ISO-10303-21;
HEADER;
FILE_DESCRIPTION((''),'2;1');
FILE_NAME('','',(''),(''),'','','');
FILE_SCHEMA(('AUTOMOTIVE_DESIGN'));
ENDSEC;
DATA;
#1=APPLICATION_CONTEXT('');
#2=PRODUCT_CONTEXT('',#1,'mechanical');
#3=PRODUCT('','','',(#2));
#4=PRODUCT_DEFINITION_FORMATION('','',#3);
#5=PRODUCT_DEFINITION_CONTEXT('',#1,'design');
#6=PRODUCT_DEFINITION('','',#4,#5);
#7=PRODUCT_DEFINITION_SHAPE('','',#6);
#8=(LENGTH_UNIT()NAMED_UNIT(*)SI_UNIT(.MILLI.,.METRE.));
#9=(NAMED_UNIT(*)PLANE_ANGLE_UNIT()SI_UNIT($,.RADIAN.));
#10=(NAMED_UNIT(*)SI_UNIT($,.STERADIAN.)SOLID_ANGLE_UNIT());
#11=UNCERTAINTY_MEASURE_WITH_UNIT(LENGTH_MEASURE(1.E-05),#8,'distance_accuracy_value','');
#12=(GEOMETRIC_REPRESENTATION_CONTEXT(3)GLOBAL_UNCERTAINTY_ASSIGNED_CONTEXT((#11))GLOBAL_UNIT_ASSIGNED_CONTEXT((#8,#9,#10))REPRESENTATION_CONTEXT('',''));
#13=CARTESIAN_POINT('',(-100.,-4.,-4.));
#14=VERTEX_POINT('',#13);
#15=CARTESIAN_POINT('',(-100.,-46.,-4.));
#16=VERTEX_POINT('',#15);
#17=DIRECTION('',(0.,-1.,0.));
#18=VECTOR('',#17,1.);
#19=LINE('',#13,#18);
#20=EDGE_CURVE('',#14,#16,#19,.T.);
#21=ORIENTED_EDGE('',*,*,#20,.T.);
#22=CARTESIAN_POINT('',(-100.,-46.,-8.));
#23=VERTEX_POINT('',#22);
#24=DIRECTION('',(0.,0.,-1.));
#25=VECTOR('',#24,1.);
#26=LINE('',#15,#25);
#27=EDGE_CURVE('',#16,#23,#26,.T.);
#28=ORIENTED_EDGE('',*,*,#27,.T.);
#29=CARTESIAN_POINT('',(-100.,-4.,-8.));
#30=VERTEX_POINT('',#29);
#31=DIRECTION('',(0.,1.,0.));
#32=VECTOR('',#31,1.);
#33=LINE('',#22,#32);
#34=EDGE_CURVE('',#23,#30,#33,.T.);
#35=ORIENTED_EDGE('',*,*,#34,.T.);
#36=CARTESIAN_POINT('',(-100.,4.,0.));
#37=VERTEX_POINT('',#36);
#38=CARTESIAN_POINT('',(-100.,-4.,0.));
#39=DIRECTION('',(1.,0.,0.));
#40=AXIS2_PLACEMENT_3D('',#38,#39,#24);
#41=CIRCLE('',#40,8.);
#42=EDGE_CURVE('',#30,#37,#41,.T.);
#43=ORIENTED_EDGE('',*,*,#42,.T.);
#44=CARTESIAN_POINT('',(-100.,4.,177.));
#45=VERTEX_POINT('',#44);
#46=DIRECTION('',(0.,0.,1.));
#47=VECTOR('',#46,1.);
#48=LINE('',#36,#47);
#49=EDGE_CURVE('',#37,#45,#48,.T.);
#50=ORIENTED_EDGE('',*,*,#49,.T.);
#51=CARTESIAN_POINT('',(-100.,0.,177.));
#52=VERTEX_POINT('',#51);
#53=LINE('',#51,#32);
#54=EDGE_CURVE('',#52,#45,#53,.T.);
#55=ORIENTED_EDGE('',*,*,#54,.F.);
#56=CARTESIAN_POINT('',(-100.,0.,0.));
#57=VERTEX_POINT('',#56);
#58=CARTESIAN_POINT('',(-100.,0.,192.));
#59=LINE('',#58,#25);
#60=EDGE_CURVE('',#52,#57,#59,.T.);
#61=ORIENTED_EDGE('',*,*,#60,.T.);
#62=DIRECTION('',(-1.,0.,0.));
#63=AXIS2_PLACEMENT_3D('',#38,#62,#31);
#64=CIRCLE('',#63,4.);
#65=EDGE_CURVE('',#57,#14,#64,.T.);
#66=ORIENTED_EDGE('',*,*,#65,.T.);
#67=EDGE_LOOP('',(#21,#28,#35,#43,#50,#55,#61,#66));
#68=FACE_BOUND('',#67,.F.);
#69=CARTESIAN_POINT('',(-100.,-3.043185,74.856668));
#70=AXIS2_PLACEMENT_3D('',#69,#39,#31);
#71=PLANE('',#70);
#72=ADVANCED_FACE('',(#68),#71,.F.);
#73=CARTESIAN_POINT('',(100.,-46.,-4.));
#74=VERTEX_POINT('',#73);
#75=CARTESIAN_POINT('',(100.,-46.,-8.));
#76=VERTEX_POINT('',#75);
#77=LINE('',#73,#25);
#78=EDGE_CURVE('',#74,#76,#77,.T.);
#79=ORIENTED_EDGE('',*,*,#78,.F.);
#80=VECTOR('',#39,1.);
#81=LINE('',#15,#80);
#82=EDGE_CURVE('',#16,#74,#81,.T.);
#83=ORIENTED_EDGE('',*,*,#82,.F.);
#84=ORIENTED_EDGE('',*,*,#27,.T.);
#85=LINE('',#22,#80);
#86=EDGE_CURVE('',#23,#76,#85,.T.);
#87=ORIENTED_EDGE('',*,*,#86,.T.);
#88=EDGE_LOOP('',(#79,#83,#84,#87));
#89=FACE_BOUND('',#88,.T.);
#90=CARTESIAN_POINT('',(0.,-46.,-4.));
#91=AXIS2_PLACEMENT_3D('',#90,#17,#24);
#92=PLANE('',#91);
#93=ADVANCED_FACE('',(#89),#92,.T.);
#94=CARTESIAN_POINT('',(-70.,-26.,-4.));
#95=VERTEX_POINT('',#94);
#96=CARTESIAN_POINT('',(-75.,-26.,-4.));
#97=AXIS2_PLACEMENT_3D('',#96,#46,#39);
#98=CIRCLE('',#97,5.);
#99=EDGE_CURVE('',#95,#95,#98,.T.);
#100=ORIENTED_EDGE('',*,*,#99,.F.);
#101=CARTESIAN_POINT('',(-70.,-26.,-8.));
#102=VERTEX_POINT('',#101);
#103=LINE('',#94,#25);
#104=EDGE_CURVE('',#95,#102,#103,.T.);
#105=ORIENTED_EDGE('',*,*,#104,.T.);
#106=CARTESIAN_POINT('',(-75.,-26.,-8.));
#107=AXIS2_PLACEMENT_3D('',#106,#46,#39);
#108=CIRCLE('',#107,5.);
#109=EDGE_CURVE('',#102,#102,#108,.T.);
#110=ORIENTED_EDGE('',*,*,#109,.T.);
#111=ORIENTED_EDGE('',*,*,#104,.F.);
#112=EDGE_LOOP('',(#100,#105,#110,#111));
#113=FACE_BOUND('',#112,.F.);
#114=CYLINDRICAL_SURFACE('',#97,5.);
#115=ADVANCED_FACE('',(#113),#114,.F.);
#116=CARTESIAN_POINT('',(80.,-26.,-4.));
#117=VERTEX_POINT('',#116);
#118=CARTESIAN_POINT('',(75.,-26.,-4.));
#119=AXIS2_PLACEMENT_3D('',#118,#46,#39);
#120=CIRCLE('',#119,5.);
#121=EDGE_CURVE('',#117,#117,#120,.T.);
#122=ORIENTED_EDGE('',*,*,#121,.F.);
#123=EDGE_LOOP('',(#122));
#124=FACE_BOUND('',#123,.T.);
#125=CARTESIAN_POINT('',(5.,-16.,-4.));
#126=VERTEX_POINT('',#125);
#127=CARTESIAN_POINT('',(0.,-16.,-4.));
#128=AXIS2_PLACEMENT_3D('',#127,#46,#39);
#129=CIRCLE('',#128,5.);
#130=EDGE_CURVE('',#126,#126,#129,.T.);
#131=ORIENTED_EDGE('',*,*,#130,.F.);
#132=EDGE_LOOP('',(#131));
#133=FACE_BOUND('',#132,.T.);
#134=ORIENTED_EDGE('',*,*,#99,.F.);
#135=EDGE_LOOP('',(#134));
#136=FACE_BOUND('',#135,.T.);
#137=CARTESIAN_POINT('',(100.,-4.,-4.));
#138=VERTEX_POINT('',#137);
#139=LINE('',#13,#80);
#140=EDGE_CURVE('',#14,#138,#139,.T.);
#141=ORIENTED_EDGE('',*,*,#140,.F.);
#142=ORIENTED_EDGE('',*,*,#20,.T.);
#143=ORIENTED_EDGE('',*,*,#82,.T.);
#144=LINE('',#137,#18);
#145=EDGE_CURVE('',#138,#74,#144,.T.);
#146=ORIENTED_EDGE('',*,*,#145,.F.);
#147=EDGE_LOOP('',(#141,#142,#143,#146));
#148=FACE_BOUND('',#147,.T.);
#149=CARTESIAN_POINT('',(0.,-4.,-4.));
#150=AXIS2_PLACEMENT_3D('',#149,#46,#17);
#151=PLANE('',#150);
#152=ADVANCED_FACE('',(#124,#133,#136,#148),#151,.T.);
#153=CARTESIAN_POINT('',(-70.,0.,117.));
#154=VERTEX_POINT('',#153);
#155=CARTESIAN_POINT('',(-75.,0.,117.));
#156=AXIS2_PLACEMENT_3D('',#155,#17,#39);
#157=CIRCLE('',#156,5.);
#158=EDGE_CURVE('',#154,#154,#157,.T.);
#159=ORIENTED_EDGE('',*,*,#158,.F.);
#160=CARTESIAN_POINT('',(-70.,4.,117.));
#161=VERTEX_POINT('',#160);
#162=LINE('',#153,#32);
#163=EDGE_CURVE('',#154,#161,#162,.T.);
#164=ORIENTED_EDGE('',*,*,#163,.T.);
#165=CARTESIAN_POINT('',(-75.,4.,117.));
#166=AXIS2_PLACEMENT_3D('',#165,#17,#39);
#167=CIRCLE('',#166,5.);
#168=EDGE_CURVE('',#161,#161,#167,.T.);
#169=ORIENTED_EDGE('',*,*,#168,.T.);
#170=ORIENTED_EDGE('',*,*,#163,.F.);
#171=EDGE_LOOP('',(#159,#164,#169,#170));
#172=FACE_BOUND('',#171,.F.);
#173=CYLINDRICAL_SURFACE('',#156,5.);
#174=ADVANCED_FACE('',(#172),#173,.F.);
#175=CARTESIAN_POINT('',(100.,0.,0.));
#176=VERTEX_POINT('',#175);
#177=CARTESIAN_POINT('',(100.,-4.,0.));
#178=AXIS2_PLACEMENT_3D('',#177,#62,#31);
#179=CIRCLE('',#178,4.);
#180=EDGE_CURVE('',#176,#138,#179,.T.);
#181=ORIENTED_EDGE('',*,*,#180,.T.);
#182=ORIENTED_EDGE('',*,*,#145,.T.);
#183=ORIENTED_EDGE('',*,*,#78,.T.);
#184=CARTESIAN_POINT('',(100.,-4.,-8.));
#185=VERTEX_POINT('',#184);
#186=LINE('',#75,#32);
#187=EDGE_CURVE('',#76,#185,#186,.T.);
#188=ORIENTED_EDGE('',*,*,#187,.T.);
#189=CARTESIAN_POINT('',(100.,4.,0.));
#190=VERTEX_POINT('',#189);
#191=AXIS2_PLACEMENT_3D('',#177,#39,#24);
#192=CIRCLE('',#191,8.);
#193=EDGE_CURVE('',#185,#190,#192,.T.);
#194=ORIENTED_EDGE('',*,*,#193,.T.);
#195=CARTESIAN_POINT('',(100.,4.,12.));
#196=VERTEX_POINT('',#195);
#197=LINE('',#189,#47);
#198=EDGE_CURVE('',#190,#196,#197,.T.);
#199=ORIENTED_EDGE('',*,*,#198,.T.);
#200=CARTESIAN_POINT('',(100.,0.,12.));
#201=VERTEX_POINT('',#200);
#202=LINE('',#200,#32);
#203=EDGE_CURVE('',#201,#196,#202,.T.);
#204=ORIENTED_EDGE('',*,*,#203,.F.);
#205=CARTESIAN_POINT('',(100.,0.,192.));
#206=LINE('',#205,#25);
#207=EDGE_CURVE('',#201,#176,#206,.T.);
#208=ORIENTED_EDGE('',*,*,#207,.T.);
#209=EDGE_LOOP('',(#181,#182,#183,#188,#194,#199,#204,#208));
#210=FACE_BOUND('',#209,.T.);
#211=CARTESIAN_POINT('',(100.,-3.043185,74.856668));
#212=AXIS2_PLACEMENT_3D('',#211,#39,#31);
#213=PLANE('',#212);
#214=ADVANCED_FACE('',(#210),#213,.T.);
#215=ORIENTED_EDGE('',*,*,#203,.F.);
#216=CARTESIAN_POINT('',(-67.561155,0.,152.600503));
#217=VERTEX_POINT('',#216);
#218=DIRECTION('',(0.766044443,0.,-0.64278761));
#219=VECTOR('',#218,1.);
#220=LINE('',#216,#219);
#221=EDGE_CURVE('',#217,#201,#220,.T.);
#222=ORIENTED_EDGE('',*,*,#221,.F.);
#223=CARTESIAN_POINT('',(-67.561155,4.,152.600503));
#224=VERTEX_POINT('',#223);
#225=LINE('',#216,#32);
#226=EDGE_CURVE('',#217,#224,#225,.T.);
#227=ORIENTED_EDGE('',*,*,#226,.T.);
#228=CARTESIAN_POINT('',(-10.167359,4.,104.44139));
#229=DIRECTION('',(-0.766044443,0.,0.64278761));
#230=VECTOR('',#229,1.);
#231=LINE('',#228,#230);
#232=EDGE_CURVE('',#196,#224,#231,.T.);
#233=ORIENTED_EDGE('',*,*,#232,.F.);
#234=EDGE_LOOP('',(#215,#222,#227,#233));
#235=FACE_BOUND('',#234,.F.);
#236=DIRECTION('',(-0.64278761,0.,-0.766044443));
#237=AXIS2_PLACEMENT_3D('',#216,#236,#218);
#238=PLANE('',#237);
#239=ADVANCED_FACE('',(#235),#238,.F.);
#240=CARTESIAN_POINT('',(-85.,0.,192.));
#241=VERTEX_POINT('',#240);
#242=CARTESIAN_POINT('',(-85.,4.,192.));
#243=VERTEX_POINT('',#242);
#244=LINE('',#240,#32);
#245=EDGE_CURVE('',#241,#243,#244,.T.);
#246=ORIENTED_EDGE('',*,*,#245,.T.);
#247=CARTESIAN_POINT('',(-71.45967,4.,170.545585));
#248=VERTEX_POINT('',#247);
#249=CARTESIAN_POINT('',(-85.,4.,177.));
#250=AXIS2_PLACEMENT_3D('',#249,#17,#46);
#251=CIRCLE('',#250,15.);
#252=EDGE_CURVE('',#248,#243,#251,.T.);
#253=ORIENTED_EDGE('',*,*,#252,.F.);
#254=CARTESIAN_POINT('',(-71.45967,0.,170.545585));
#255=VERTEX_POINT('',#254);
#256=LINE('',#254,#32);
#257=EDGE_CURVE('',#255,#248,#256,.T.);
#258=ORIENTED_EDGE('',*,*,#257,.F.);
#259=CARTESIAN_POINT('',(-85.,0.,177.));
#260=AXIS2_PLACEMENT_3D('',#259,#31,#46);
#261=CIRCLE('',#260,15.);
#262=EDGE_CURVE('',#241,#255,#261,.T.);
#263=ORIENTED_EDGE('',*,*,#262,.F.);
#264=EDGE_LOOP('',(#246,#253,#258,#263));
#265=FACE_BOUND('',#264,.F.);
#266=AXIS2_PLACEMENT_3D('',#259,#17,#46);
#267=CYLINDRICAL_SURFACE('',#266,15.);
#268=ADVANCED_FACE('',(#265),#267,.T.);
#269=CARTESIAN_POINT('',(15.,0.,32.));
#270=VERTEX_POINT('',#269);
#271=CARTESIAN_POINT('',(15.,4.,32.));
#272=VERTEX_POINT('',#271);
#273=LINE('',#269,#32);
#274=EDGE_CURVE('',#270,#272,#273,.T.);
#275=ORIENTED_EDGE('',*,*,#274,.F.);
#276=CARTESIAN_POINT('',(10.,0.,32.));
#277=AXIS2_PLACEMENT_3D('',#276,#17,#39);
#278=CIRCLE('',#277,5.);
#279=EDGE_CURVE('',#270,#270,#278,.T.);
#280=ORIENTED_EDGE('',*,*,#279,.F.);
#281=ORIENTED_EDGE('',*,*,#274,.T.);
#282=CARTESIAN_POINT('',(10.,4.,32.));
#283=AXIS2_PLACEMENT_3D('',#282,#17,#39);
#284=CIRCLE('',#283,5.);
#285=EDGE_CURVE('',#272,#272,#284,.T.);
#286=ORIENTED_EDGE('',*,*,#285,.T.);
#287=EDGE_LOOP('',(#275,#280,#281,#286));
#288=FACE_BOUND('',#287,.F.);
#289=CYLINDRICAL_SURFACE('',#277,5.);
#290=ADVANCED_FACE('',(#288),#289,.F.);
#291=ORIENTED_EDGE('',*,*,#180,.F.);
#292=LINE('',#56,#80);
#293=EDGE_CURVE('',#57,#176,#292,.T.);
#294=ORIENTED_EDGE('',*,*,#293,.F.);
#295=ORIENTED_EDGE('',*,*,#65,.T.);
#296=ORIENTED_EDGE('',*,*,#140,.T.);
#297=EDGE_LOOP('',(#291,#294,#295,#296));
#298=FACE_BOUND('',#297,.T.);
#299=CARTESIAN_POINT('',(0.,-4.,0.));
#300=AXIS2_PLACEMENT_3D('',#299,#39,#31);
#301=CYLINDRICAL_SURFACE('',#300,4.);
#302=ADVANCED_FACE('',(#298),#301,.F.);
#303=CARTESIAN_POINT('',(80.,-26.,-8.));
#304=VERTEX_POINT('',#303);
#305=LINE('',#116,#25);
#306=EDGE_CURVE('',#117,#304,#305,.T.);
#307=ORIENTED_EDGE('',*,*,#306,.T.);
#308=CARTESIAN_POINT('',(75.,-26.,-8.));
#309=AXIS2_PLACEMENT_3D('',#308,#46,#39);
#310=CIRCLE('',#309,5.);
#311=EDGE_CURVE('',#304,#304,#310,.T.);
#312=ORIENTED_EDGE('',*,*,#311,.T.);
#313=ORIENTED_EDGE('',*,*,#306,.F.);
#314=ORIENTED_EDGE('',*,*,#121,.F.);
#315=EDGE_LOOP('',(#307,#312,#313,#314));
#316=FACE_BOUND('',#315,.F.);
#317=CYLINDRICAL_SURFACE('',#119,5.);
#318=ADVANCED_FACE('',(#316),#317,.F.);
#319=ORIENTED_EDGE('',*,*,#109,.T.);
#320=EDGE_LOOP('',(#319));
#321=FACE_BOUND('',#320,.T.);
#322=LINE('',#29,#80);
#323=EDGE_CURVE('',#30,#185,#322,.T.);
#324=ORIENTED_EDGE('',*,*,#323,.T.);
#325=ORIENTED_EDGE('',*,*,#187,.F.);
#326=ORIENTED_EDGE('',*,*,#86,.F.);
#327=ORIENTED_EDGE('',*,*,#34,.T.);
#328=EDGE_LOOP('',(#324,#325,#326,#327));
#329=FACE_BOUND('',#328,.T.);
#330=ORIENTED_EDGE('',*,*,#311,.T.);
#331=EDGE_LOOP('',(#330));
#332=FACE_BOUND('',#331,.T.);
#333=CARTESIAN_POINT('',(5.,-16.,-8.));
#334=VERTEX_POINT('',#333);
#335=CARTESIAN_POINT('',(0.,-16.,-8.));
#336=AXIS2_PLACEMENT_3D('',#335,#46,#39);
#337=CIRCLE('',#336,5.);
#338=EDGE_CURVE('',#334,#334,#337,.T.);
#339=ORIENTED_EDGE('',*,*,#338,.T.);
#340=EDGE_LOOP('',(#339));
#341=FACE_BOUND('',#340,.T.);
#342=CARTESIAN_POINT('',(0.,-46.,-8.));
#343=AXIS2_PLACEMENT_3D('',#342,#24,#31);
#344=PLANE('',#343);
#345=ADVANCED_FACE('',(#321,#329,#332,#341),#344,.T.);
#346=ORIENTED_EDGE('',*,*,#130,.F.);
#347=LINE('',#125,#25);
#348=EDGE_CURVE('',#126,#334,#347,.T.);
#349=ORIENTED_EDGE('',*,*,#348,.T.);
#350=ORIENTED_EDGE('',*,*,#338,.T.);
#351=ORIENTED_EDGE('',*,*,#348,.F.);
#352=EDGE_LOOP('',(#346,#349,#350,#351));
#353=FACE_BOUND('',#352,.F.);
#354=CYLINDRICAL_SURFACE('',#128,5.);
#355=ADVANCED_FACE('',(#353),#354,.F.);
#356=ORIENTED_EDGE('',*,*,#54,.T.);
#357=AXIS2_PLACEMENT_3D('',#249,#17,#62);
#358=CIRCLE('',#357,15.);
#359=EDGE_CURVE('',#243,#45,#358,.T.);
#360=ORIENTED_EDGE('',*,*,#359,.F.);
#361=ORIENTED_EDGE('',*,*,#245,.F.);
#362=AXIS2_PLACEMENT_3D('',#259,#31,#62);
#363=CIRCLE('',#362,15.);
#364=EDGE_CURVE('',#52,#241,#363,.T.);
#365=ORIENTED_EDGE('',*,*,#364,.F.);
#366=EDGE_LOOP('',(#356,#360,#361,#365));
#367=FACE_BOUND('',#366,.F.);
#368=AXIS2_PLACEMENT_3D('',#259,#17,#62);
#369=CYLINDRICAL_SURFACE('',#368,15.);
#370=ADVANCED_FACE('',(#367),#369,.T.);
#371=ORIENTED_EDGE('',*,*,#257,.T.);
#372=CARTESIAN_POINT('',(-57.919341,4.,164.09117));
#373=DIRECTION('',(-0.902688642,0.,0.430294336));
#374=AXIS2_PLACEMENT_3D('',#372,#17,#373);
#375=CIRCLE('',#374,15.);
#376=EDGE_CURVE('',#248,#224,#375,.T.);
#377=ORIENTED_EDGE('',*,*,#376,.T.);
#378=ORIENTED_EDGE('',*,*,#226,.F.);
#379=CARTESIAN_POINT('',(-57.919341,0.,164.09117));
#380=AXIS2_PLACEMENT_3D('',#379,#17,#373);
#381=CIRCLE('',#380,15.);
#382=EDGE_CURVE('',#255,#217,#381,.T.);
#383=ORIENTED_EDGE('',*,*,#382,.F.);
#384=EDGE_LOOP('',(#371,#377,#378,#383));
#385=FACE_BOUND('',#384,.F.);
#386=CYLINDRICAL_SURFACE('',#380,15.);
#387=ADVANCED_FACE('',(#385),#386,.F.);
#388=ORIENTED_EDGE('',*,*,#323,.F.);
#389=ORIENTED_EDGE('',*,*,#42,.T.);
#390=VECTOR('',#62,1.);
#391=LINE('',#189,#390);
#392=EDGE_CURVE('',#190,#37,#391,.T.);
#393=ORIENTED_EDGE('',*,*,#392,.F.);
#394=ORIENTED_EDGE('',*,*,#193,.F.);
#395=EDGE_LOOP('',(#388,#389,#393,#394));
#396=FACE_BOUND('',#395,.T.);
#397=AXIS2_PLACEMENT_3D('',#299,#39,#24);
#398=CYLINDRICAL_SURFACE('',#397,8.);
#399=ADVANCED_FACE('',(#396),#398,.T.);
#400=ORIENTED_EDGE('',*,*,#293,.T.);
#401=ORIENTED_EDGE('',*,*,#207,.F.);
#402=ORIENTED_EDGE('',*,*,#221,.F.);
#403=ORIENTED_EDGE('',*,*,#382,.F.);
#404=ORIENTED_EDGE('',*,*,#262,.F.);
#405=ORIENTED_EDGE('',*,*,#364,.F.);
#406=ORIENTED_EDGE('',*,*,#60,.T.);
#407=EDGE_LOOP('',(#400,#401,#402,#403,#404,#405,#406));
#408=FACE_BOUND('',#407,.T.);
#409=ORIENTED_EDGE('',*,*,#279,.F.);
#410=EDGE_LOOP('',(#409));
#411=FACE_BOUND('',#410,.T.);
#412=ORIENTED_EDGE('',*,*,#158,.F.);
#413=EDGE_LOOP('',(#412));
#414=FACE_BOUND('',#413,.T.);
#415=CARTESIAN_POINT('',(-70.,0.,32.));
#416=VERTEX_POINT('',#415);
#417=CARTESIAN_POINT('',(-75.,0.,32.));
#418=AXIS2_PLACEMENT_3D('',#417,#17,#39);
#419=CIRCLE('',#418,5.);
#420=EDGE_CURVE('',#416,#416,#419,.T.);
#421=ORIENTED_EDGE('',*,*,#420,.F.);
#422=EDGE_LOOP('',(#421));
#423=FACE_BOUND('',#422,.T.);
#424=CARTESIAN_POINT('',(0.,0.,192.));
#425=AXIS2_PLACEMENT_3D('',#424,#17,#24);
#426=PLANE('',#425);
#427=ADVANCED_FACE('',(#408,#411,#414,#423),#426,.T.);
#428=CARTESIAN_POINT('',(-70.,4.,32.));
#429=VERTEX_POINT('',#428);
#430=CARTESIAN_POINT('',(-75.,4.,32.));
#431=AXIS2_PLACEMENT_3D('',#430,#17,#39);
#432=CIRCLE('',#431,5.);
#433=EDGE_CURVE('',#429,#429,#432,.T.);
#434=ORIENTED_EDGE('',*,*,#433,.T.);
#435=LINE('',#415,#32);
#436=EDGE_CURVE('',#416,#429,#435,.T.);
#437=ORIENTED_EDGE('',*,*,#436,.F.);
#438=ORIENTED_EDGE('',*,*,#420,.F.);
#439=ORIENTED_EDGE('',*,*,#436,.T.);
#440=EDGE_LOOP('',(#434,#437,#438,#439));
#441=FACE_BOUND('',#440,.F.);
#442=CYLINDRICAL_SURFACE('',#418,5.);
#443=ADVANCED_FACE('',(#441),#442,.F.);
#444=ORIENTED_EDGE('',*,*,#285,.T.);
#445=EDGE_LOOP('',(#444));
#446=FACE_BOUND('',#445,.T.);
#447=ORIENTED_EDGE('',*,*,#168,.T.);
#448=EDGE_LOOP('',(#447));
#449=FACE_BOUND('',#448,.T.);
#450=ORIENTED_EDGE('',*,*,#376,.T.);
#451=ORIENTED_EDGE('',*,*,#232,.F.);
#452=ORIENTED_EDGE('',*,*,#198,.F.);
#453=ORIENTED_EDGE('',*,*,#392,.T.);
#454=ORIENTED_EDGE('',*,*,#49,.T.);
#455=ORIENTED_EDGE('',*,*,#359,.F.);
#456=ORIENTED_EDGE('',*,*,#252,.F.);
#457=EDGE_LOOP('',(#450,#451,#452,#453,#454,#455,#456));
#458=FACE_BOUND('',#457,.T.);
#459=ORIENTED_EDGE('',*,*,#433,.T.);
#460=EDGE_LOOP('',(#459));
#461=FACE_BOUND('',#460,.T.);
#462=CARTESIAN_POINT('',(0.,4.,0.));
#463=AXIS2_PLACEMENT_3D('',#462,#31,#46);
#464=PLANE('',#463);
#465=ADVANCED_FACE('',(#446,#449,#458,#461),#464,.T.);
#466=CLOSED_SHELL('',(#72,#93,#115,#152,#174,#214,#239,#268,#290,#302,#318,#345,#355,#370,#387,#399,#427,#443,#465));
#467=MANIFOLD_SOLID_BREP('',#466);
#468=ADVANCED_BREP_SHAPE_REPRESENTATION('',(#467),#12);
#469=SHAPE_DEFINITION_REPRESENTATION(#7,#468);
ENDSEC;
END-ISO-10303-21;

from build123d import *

# Parameters (mm, degrees)
F1_DEPTH = 100
F3_DEPTH = 4.001
F4_R     = 5
F5_DEPTH = 4.001
F6_R     = 5
F7_DEPTH = 4.001


# Not quite as in the source:
# - a feature names something its author has since deleted; it is built from what else it names


with BuildPart() as f1:
    # F0 (on Right) → F1 (new body, symmetric)
    with BuildSketch(Plane.YZ):
        with BuildLine():
            Line((0, 192), (0, 0))
            ThreePointArc((0, 0), (-1.1715728753, -2.8284271247), (-4, -4))
            Line((-4, -4), (-46, -4))
            Line((-46, -4), (-46, -8))
            Line((-46, -8), (-4, -8))
            ThreePointArc((-4, -8), (1.6568542495, -5.6568542495), (4, 0))
            Line((4, 0), (4, 192))
            Line((4, 192), (0, 192))
        make_face()
    extrude(amount=F1_DEPTH, both=True)

    # F2 (on face) → F3 (cut, through all)
    with BuildSketch(Plane.XZ):
        with BuildLine():
            Line((-67.5611548883, 152.6005032665), (100, 12))
            Line((100, 12), (100, 192))
            Line((100, 192), (-85, 192))
            ThreePointArc((-85, 192), (-72.3150438383, 185.0057408886), (-71.4596703715, 170.5455849566))
            ThreePointArc((-71.4596703715, 170.5455849566), (-72.5774250894, 160.9067448009), (-67.5611548883, 152.6005032665))
        make_face()
        with BuildLine():
            ThreePointArc((-100, 177), (-95.6066017178, 187.6066017178), (-85, 192))
            Line((-85, 192), (-100, 192))
            Line((-100, 192), (-100, 177))
        make_face()
    extrude(amount=-F3_DEPTH, mode=Mode.SUBTRACT)

    # F4 (on face) → F5 (cut, through all)
    with BuildSketch(Plane.XZ):
        with Locations((-75, 32)):
            Circle(F4_R)
        with Locations((10, 32)):
            Circle(F4_R)
        with Locations((-75, 117)):
            Circle(F4_R)
    extrude(amount=-F5_DEPTH, mode=Mode.SUBTRACT)

    # F6 (on face) → F7 (cut, through all)
    with BuildSketch(Plane.XY.offset(-4)):
        with Locations((-75, -26)):
            Circle(F6_R)
        with Locations((0, -16)):
            Circle(F6_R)
        with Locations((75, -26)):
            Circle(F6_R)
    extrude(amount=-F7_DEPTH, mode=Mode.SUBTRACT)


solid = f1.part
